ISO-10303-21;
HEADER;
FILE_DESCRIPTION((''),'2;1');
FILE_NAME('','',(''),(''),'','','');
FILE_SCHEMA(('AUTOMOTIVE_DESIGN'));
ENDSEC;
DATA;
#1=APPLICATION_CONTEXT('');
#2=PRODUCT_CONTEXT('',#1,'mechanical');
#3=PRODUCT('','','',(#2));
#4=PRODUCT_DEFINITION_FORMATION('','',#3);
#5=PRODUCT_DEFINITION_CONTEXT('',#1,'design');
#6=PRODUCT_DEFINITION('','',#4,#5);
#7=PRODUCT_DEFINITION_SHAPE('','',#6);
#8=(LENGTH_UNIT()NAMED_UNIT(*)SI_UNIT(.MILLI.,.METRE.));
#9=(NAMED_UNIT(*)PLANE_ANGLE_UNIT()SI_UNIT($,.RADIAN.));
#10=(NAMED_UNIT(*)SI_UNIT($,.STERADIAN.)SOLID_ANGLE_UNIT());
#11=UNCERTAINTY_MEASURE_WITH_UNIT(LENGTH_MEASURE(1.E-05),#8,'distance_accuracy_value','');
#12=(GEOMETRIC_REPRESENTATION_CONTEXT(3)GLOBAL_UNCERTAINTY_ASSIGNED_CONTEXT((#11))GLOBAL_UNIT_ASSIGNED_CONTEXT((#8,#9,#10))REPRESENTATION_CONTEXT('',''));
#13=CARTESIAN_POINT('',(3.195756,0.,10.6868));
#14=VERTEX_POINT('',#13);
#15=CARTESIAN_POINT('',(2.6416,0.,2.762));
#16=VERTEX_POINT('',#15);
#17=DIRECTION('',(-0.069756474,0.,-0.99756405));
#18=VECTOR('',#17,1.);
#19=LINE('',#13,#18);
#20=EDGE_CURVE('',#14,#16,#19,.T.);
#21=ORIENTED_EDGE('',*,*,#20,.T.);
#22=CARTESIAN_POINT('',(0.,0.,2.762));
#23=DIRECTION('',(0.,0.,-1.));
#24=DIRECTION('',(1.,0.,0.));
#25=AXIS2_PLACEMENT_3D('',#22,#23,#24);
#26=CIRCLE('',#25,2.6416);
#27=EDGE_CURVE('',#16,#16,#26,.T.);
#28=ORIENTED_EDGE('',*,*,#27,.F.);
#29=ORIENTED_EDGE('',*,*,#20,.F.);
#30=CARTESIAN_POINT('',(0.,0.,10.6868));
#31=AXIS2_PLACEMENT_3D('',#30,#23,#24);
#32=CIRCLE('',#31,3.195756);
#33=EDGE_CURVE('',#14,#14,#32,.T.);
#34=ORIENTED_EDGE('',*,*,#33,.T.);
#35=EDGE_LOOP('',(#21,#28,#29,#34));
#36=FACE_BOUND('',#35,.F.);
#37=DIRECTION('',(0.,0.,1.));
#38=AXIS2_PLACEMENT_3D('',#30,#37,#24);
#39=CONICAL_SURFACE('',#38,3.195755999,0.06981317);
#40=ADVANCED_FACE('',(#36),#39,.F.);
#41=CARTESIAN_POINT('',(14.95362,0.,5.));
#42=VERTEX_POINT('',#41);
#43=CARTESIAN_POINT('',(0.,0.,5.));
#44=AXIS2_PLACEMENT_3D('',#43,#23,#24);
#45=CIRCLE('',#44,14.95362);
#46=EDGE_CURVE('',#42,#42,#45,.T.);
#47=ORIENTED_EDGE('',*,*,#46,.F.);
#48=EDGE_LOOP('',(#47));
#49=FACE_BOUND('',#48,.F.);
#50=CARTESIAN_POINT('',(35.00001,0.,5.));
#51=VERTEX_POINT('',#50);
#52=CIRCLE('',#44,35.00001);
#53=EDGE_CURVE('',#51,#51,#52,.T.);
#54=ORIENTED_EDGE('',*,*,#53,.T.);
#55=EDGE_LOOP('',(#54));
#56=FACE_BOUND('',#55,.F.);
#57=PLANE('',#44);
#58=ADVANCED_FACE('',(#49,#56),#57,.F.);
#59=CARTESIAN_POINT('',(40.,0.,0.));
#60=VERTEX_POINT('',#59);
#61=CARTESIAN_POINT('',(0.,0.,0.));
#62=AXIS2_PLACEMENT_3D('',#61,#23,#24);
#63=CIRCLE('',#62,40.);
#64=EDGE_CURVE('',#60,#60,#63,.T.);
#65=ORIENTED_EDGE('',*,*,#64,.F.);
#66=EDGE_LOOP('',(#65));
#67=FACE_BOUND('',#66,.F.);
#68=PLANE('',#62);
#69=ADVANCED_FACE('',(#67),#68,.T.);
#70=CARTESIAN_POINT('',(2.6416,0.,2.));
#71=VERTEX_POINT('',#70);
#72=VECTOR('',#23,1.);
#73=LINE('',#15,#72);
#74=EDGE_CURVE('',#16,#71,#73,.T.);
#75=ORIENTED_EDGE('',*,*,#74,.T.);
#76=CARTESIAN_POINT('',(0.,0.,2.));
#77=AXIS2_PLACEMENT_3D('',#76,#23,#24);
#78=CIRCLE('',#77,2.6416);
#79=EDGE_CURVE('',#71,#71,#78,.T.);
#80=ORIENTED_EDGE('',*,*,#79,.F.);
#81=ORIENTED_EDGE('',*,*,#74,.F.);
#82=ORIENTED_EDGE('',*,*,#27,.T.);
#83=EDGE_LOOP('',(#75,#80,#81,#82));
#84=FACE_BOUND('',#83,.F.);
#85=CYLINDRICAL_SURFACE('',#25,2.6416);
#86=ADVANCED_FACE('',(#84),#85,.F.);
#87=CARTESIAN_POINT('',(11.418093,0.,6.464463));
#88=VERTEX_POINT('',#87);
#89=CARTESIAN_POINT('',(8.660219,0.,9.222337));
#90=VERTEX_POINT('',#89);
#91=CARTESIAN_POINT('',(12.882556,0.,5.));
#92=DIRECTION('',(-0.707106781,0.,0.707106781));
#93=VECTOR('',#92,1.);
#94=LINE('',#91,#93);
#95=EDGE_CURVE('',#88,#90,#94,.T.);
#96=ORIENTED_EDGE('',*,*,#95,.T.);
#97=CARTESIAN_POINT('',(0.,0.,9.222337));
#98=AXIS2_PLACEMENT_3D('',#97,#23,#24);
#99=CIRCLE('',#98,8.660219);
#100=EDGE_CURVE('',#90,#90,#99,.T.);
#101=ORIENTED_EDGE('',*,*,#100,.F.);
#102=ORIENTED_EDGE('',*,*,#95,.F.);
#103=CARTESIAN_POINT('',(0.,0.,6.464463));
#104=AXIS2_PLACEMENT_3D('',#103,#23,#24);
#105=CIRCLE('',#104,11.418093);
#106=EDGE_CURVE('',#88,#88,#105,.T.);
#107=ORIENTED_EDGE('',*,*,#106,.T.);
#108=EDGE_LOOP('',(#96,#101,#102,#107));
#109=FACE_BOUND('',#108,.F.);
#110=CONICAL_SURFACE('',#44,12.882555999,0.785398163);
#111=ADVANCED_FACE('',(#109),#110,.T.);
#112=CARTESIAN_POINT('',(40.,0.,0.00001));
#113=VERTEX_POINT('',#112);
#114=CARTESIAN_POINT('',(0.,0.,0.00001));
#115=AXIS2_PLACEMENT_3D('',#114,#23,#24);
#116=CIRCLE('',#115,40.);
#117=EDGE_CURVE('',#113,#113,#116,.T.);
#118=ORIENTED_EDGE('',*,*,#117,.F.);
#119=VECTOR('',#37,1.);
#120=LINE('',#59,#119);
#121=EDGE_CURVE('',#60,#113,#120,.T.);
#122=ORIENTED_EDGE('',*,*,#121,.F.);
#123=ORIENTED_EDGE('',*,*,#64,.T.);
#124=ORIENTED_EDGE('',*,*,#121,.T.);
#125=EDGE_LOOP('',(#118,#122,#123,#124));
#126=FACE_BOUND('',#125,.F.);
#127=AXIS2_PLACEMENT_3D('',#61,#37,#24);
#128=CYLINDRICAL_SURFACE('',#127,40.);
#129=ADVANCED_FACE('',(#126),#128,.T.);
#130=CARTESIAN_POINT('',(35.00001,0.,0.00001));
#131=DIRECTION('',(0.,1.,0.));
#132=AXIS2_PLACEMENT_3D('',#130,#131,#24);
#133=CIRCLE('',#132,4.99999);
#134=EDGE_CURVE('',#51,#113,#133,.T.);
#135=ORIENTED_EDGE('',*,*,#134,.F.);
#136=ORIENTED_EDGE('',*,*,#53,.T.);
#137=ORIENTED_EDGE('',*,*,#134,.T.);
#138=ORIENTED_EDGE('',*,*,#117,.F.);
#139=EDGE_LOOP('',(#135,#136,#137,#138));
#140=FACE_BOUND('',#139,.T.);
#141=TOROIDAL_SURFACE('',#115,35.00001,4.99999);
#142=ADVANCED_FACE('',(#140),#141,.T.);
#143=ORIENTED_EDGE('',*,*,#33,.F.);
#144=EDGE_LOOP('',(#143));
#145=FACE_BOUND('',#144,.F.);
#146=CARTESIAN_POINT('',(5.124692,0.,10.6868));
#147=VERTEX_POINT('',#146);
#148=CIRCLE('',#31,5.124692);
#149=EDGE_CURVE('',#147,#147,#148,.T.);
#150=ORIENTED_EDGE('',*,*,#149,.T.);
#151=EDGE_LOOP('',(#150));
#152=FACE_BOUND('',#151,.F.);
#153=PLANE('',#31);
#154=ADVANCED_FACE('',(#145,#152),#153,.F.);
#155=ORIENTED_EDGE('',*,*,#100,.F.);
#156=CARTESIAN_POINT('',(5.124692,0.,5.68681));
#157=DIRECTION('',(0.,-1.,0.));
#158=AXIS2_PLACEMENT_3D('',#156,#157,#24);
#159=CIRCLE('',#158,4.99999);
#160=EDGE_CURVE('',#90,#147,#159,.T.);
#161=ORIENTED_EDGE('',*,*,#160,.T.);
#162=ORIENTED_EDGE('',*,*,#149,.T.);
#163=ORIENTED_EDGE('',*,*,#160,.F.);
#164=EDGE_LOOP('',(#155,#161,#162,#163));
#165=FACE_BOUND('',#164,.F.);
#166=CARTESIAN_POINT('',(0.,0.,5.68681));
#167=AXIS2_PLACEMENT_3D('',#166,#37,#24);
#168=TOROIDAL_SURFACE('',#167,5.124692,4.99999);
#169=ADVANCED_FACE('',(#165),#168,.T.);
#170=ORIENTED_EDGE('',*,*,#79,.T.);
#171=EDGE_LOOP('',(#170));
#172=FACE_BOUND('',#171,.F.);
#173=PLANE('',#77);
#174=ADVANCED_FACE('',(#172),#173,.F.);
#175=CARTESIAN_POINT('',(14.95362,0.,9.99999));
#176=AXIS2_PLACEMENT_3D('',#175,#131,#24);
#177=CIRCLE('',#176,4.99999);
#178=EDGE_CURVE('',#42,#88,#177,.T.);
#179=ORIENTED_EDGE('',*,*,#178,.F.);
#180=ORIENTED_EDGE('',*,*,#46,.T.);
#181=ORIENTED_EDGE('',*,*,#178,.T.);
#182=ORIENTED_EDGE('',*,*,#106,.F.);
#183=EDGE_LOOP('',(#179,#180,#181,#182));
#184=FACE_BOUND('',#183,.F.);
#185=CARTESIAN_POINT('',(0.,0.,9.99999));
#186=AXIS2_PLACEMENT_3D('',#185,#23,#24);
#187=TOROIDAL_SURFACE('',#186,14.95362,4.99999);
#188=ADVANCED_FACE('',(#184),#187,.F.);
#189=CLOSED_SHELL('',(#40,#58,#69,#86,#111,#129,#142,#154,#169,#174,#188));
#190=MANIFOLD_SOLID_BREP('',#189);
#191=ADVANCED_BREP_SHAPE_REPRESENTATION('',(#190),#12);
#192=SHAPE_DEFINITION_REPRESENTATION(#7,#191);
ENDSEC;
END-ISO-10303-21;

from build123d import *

# Parameters (mm, degrees)
F2_R = 4.99999


# Not quite as in the source:
# - a fillet or chamfer is up to 0.001 mm smaller than in the source, because OpenCascade refuses the exact size


with BuildPart() as f1:
    # F0 (on Front) → F1 (revolve)
    with BuildSketch(Plane.XZ):
        Polygon((40, 5), (12.8825559993, 5), (7.1957559993, 10.6868), (3.1957559993, 10.6868), (2.6416, 2.762), (2.6416, 2), (0, 2), (0, 0), (40, 0), align=None)
    revolve(axis=Axis((0, 0, -11.1281685531), (0, 0, -1)))

    # F2 (radius 5 in the source; OpenCascade refuses exactly that, so slightly less here)
    f2_edges = [f1.edges().sort_by_distance(p)[0] for p in [
        (-12.882556, 0, 5),
        (-40, 0, 5),
        (-7.195756, 0, 10.6868),
    ]]
    fillet(f2_edges, radius=F2_R)


solid = f1.part
